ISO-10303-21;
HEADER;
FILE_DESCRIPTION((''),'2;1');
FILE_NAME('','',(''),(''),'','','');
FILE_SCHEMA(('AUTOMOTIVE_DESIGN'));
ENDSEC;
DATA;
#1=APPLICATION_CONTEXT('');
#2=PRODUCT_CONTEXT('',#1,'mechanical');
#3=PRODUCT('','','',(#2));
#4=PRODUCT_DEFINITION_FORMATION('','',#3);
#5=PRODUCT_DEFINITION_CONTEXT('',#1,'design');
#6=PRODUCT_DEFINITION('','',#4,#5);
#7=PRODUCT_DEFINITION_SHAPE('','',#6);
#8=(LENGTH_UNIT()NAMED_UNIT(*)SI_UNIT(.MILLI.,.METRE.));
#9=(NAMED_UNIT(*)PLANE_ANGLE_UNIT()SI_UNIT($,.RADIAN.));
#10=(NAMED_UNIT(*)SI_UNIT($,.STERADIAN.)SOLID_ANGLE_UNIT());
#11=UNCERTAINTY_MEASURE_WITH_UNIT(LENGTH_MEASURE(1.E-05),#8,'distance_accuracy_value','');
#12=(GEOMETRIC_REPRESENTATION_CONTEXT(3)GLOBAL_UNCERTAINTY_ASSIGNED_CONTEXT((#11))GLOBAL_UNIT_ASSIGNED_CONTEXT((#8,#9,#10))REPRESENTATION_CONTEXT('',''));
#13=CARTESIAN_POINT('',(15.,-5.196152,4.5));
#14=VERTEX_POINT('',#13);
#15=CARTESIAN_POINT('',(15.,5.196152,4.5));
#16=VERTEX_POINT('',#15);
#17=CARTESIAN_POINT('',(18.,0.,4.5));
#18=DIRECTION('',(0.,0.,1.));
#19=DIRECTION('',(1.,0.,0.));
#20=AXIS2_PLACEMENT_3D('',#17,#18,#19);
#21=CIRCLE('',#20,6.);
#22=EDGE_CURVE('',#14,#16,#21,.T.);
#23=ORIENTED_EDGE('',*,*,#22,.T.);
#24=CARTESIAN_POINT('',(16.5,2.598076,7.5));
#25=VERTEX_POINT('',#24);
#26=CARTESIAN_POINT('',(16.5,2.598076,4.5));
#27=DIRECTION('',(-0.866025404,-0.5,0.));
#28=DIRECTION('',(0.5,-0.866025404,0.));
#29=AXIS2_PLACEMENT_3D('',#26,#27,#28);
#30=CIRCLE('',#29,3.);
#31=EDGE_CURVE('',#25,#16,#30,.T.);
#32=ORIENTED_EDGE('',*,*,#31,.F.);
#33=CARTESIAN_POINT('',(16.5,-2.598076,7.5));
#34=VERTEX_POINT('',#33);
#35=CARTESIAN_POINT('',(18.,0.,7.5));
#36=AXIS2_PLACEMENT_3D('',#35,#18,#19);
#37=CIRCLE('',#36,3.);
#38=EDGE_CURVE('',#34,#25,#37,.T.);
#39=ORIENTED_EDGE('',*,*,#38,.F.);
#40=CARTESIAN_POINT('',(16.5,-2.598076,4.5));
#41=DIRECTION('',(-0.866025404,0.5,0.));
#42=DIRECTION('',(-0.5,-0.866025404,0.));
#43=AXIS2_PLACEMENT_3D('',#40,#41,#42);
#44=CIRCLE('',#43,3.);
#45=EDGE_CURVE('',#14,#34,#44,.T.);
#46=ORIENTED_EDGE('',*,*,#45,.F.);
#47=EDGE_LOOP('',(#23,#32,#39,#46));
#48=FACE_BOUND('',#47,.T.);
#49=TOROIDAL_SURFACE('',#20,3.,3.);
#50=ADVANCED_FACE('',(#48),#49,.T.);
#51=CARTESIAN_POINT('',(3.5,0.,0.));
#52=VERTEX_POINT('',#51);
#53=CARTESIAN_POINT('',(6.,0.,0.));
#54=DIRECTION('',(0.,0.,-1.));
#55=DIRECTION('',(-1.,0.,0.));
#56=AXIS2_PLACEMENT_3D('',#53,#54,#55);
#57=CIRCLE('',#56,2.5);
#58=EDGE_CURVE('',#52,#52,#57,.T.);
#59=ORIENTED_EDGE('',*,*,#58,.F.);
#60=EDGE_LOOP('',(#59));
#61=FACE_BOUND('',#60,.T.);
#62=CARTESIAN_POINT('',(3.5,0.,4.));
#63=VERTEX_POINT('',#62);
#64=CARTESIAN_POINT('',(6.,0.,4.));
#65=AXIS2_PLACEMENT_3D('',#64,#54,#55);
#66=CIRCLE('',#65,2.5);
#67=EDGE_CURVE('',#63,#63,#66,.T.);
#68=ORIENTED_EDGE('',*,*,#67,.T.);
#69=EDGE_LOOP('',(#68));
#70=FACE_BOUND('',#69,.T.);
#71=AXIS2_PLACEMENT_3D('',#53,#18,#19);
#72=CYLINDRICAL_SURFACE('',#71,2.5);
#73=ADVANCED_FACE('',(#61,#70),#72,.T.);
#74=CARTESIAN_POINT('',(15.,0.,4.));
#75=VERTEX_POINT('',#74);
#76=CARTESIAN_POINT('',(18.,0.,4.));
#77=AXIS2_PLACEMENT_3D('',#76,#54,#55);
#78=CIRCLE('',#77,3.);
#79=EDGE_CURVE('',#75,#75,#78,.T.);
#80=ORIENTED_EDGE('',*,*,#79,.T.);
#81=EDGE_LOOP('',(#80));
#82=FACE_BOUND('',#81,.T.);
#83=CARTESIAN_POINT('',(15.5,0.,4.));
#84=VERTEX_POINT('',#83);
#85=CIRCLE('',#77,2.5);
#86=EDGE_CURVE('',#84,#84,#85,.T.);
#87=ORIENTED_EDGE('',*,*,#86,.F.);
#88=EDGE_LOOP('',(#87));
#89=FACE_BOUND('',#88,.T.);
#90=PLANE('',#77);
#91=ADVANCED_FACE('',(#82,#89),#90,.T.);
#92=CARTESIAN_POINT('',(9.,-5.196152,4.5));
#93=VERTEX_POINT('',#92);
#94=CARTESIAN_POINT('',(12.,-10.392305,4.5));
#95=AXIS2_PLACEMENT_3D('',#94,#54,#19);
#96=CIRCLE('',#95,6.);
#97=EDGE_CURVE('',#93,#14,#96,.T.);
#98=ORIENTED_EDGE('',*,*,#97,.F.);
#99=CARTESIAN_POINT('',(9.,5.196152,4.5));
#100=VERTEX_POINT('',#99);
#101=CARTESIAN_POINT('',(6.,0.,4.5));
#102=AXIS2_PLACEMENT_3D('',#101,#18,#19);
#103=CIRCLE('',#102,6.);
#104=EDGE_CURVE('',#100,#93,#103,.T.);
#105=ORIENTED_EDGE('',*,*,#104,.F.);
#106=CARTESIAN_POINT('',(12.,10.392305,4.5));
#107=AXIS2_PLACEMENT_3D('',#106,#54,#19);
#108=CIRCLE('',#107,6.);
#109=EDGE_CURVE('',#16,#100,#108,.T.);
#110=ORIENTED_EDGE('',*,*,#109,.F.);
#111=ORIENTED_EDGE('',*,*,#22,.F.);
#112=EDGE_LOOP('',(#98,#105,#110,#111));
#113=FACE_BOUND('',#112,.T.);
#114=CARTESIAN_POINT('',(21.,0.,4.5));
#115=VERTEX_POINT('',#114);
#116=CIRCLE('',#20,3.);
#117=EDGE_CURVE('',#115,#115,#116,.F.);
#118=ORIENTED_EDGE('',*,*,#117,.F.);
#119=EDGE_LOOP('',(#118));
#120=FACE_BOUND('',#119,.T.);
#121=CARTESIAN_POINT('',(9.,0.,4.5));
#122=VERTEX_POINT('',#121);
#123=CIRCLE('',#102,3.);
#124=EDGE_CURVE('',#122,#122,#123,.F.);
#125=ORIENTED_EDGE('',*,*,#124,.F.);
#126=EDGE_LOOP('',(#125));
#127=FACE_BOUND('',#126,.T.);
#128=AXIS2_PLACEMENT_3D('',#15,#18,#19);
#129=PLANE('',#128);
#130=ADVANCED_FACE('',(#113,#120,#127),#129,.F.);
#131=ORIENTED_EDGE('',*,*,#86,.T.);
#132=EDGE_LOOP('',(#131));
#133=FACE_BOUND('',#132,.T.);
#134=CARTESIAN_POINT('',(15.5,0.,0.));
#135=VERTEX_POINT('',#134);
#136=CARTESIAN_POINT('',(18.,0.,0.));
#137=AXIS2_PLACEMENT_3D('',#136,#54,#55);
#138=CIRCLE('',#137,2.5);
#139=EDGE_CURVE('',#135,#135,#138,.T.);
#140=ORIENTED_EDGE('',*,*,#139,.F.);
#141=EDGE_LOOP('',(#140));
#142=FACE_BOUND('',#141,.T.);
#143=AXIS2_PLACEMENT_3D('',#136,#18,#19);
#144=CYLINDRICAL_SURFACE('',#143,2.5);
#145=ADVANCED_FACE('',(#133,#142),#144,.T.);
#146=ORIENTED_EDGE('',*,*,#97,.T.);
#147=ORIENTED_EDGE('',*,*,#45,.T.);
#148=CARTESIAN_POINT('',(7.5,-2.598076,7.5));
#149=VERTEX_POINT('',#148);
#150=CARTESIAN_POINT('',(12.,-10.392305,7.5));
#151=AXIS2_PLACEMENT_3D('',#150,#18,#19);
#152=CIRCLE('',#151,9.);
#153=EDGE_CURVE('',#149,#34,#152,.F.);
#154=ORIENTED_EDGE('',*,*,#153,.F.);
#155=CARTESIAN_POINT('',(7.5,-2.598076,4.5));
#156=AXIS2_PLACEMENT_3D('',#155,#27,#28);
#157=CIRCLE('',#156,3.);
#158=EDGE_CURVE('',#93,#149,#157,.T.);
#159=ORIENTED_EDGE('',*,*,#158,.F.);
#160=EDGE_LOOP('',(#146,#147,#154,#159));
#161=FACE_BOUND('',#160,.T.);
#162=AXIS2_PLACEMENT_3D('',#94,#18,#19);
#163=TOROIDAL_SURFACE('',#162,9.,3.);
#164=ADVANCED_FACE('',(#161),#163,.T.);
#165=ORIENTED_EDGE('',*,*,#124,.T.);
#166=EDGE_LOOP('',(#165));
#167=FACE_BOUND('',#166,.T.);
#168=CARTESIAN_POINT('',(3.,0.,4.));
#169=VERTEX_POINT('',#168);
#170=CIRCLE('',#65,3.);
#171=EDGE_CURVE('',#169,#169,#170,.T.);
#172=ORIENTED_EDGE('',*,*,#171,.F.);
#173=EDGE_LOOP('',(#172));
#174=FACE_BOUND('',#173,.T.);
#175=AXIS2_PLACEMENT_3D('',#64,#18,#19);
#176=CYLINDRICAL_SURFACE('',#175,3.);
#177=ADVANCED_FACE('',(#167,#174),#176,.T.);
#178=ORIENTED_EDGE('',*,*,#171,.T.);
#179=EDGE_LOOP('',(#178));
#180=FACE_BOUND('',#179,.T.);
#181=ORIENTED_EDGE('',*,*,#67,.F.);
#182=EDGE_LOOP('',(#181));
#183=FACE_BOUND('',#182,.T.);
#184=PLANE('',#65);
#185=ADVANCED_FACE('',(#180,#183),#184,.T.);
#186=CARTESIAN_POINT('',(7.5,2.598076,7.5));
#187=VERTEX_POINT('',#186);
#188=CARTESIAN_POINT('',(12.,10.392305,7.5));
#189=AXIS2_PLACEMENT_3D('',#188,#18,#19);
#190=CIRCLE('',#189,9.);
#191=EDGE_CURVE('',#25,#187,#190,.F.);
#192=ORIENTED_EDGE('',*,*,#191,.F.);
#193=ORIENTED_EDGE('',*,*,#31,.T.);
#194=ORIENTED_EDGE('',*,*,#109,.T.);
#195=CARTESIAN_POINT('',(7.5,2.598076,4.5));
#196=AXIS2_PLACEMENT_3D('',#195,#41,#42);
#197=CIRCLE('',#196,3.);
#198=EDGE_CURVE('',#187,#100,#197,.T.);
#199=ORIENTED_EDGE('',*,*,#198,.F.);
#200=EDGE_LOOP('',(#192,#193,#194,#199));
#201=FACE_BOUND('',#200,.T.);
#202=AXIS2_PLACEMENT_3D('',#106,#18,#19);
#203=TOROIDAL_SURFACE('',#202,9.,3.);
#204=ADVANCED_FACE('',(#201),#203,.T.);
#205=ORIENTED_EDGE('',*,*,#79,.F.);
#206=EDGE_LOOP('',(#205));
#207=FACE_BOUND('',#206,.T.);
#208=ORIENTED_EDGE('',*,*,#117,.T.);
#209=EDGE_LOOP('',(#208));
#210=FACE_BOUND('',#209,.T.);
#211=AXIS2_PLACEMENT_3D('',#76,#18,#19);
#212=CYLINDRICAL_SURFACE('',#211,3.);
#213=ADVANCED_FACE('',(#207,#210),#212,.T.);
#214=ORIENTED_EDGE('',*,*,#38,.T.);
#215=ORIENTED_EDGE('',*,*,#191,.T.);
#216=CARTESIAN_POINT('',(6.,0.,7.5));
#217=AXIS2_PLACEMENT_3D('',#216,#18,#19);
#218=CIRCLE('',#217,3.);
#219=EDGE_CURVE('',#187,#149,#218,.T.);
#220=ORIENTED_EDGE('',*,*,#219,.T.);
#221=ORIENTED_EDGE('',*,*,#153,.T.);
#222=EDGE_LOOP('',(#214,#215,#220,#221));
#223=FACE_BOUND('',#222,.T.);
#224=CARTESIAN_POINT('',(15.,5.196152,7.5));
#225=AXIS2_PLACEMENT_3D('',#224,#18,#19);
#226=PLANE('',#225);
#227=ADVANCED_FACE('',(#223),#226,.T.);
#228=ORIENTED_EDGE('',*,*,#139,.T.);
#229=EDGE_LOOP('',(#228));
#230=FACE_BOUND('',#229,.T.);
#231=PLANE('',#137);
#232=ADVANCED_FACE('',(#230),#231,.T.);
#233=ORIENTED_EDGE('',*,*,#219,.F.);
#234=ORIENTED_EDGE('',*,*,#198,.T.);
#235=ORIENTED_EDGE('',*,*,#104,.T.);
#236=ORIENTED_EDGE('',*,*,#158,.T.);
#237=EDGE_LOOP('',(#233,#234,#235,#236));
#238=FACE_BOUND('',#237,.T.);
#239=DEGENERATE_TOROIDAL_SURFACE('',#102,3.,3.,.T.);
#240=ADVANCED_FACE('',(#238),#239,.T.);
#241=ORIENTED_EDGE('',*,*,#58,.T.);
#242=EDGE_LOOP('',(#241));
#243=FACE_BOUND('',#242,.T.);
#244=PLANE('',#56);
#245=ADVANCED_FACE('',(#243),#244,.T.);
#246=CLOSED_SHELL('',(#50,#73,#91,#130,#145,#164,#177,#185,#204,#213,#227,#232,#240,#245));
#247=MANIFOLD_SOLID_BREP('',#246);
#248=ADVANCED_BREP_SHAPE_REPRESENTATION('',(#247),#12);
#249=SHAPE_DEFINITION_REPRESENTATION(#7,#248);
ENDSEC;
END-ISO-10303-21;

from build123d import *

# Parameters (mm, degrees)
EXTRUDE_START   = 4.5
EXTRUDE_1_DEPTH = 3
SKETCH_3_R      = 2.5
EXTRUDE_2_DEPTH = 4.5
SKETCH_6_R      = 3
EXTRUDE_3_DEPTH = 0.5
FILLET_1_R      = 3


with BuildPart() as part:
    # Эскиз2 → Бобышка-Вытянуть1 (new body)
    with BuildSketch(Plane.XY.offset(EXTRUDE_START)):
        with BuildLine():
            ThreePointArc((9, 5.196152423), (0, 0), (9, -5.196152423))
            ThreePointArc((9, -5.196152423), (12, -4.392304845), (15, -5.196152423))
            ThreePointArc((15, -5.196152423), (24, 0), (15, 5.196152423))
            ThreePointArc((15, 5.196152423), (12, 4.392304845), (9, 5.196152423))
        make_face()
    extrude(amount=EXTRUDE_1_DEPTH)

    # Эскиз3 → Бобышка-Вытянуть2 (add)
    with BuildSketch(Plane(origin=(0, 0, 4.5), x_dir=(-1, 0, 0), z_dir=(0, 0, -1))):
        with Locations(Location((-18, 0, 0), (0, 0, 180))):
            Circle(SKETCH_3_R)
        with Locations(Location((-6, 0, 0), (0, 0, 180))):
            Circle(SKETCH_3_R)
    extrude(amount=EXTRUDE_2_DEPTH)

    # Эскиз6 → Бобышка-Вытянуть3 (add)
    with BuildSketch(Plane(origin=(0, 0, 4.5), x_dir=(-1, 0, 0), z_dir=(0, 0, -1))):
        with Locations(Location((-18, 0, 0), (0, 0, 180))):
            Circle(SKETCH_6_R)
        with Locations(Location((-6, 0, 0), (0, 0, 180))):
            Circle(SKETCH_6_R)
    extrude(amount=EXTRUDE_3_DEPTH)

    # Скругление1
    fillet_1_edges = [part.edges().sort_by_distance(p)[0] for p in [
        (0, 0, 7.5),
        (12, 4.392304845, 7.5),
        (24, 0, 7.5),
        (12, -4.392304845, 7.5),
    ]]
    fillet(fillet_1_edges, radius=FILLET_1_R - 0.0001)  # a hair under: the kernel refuses the full size


solid = part.part
